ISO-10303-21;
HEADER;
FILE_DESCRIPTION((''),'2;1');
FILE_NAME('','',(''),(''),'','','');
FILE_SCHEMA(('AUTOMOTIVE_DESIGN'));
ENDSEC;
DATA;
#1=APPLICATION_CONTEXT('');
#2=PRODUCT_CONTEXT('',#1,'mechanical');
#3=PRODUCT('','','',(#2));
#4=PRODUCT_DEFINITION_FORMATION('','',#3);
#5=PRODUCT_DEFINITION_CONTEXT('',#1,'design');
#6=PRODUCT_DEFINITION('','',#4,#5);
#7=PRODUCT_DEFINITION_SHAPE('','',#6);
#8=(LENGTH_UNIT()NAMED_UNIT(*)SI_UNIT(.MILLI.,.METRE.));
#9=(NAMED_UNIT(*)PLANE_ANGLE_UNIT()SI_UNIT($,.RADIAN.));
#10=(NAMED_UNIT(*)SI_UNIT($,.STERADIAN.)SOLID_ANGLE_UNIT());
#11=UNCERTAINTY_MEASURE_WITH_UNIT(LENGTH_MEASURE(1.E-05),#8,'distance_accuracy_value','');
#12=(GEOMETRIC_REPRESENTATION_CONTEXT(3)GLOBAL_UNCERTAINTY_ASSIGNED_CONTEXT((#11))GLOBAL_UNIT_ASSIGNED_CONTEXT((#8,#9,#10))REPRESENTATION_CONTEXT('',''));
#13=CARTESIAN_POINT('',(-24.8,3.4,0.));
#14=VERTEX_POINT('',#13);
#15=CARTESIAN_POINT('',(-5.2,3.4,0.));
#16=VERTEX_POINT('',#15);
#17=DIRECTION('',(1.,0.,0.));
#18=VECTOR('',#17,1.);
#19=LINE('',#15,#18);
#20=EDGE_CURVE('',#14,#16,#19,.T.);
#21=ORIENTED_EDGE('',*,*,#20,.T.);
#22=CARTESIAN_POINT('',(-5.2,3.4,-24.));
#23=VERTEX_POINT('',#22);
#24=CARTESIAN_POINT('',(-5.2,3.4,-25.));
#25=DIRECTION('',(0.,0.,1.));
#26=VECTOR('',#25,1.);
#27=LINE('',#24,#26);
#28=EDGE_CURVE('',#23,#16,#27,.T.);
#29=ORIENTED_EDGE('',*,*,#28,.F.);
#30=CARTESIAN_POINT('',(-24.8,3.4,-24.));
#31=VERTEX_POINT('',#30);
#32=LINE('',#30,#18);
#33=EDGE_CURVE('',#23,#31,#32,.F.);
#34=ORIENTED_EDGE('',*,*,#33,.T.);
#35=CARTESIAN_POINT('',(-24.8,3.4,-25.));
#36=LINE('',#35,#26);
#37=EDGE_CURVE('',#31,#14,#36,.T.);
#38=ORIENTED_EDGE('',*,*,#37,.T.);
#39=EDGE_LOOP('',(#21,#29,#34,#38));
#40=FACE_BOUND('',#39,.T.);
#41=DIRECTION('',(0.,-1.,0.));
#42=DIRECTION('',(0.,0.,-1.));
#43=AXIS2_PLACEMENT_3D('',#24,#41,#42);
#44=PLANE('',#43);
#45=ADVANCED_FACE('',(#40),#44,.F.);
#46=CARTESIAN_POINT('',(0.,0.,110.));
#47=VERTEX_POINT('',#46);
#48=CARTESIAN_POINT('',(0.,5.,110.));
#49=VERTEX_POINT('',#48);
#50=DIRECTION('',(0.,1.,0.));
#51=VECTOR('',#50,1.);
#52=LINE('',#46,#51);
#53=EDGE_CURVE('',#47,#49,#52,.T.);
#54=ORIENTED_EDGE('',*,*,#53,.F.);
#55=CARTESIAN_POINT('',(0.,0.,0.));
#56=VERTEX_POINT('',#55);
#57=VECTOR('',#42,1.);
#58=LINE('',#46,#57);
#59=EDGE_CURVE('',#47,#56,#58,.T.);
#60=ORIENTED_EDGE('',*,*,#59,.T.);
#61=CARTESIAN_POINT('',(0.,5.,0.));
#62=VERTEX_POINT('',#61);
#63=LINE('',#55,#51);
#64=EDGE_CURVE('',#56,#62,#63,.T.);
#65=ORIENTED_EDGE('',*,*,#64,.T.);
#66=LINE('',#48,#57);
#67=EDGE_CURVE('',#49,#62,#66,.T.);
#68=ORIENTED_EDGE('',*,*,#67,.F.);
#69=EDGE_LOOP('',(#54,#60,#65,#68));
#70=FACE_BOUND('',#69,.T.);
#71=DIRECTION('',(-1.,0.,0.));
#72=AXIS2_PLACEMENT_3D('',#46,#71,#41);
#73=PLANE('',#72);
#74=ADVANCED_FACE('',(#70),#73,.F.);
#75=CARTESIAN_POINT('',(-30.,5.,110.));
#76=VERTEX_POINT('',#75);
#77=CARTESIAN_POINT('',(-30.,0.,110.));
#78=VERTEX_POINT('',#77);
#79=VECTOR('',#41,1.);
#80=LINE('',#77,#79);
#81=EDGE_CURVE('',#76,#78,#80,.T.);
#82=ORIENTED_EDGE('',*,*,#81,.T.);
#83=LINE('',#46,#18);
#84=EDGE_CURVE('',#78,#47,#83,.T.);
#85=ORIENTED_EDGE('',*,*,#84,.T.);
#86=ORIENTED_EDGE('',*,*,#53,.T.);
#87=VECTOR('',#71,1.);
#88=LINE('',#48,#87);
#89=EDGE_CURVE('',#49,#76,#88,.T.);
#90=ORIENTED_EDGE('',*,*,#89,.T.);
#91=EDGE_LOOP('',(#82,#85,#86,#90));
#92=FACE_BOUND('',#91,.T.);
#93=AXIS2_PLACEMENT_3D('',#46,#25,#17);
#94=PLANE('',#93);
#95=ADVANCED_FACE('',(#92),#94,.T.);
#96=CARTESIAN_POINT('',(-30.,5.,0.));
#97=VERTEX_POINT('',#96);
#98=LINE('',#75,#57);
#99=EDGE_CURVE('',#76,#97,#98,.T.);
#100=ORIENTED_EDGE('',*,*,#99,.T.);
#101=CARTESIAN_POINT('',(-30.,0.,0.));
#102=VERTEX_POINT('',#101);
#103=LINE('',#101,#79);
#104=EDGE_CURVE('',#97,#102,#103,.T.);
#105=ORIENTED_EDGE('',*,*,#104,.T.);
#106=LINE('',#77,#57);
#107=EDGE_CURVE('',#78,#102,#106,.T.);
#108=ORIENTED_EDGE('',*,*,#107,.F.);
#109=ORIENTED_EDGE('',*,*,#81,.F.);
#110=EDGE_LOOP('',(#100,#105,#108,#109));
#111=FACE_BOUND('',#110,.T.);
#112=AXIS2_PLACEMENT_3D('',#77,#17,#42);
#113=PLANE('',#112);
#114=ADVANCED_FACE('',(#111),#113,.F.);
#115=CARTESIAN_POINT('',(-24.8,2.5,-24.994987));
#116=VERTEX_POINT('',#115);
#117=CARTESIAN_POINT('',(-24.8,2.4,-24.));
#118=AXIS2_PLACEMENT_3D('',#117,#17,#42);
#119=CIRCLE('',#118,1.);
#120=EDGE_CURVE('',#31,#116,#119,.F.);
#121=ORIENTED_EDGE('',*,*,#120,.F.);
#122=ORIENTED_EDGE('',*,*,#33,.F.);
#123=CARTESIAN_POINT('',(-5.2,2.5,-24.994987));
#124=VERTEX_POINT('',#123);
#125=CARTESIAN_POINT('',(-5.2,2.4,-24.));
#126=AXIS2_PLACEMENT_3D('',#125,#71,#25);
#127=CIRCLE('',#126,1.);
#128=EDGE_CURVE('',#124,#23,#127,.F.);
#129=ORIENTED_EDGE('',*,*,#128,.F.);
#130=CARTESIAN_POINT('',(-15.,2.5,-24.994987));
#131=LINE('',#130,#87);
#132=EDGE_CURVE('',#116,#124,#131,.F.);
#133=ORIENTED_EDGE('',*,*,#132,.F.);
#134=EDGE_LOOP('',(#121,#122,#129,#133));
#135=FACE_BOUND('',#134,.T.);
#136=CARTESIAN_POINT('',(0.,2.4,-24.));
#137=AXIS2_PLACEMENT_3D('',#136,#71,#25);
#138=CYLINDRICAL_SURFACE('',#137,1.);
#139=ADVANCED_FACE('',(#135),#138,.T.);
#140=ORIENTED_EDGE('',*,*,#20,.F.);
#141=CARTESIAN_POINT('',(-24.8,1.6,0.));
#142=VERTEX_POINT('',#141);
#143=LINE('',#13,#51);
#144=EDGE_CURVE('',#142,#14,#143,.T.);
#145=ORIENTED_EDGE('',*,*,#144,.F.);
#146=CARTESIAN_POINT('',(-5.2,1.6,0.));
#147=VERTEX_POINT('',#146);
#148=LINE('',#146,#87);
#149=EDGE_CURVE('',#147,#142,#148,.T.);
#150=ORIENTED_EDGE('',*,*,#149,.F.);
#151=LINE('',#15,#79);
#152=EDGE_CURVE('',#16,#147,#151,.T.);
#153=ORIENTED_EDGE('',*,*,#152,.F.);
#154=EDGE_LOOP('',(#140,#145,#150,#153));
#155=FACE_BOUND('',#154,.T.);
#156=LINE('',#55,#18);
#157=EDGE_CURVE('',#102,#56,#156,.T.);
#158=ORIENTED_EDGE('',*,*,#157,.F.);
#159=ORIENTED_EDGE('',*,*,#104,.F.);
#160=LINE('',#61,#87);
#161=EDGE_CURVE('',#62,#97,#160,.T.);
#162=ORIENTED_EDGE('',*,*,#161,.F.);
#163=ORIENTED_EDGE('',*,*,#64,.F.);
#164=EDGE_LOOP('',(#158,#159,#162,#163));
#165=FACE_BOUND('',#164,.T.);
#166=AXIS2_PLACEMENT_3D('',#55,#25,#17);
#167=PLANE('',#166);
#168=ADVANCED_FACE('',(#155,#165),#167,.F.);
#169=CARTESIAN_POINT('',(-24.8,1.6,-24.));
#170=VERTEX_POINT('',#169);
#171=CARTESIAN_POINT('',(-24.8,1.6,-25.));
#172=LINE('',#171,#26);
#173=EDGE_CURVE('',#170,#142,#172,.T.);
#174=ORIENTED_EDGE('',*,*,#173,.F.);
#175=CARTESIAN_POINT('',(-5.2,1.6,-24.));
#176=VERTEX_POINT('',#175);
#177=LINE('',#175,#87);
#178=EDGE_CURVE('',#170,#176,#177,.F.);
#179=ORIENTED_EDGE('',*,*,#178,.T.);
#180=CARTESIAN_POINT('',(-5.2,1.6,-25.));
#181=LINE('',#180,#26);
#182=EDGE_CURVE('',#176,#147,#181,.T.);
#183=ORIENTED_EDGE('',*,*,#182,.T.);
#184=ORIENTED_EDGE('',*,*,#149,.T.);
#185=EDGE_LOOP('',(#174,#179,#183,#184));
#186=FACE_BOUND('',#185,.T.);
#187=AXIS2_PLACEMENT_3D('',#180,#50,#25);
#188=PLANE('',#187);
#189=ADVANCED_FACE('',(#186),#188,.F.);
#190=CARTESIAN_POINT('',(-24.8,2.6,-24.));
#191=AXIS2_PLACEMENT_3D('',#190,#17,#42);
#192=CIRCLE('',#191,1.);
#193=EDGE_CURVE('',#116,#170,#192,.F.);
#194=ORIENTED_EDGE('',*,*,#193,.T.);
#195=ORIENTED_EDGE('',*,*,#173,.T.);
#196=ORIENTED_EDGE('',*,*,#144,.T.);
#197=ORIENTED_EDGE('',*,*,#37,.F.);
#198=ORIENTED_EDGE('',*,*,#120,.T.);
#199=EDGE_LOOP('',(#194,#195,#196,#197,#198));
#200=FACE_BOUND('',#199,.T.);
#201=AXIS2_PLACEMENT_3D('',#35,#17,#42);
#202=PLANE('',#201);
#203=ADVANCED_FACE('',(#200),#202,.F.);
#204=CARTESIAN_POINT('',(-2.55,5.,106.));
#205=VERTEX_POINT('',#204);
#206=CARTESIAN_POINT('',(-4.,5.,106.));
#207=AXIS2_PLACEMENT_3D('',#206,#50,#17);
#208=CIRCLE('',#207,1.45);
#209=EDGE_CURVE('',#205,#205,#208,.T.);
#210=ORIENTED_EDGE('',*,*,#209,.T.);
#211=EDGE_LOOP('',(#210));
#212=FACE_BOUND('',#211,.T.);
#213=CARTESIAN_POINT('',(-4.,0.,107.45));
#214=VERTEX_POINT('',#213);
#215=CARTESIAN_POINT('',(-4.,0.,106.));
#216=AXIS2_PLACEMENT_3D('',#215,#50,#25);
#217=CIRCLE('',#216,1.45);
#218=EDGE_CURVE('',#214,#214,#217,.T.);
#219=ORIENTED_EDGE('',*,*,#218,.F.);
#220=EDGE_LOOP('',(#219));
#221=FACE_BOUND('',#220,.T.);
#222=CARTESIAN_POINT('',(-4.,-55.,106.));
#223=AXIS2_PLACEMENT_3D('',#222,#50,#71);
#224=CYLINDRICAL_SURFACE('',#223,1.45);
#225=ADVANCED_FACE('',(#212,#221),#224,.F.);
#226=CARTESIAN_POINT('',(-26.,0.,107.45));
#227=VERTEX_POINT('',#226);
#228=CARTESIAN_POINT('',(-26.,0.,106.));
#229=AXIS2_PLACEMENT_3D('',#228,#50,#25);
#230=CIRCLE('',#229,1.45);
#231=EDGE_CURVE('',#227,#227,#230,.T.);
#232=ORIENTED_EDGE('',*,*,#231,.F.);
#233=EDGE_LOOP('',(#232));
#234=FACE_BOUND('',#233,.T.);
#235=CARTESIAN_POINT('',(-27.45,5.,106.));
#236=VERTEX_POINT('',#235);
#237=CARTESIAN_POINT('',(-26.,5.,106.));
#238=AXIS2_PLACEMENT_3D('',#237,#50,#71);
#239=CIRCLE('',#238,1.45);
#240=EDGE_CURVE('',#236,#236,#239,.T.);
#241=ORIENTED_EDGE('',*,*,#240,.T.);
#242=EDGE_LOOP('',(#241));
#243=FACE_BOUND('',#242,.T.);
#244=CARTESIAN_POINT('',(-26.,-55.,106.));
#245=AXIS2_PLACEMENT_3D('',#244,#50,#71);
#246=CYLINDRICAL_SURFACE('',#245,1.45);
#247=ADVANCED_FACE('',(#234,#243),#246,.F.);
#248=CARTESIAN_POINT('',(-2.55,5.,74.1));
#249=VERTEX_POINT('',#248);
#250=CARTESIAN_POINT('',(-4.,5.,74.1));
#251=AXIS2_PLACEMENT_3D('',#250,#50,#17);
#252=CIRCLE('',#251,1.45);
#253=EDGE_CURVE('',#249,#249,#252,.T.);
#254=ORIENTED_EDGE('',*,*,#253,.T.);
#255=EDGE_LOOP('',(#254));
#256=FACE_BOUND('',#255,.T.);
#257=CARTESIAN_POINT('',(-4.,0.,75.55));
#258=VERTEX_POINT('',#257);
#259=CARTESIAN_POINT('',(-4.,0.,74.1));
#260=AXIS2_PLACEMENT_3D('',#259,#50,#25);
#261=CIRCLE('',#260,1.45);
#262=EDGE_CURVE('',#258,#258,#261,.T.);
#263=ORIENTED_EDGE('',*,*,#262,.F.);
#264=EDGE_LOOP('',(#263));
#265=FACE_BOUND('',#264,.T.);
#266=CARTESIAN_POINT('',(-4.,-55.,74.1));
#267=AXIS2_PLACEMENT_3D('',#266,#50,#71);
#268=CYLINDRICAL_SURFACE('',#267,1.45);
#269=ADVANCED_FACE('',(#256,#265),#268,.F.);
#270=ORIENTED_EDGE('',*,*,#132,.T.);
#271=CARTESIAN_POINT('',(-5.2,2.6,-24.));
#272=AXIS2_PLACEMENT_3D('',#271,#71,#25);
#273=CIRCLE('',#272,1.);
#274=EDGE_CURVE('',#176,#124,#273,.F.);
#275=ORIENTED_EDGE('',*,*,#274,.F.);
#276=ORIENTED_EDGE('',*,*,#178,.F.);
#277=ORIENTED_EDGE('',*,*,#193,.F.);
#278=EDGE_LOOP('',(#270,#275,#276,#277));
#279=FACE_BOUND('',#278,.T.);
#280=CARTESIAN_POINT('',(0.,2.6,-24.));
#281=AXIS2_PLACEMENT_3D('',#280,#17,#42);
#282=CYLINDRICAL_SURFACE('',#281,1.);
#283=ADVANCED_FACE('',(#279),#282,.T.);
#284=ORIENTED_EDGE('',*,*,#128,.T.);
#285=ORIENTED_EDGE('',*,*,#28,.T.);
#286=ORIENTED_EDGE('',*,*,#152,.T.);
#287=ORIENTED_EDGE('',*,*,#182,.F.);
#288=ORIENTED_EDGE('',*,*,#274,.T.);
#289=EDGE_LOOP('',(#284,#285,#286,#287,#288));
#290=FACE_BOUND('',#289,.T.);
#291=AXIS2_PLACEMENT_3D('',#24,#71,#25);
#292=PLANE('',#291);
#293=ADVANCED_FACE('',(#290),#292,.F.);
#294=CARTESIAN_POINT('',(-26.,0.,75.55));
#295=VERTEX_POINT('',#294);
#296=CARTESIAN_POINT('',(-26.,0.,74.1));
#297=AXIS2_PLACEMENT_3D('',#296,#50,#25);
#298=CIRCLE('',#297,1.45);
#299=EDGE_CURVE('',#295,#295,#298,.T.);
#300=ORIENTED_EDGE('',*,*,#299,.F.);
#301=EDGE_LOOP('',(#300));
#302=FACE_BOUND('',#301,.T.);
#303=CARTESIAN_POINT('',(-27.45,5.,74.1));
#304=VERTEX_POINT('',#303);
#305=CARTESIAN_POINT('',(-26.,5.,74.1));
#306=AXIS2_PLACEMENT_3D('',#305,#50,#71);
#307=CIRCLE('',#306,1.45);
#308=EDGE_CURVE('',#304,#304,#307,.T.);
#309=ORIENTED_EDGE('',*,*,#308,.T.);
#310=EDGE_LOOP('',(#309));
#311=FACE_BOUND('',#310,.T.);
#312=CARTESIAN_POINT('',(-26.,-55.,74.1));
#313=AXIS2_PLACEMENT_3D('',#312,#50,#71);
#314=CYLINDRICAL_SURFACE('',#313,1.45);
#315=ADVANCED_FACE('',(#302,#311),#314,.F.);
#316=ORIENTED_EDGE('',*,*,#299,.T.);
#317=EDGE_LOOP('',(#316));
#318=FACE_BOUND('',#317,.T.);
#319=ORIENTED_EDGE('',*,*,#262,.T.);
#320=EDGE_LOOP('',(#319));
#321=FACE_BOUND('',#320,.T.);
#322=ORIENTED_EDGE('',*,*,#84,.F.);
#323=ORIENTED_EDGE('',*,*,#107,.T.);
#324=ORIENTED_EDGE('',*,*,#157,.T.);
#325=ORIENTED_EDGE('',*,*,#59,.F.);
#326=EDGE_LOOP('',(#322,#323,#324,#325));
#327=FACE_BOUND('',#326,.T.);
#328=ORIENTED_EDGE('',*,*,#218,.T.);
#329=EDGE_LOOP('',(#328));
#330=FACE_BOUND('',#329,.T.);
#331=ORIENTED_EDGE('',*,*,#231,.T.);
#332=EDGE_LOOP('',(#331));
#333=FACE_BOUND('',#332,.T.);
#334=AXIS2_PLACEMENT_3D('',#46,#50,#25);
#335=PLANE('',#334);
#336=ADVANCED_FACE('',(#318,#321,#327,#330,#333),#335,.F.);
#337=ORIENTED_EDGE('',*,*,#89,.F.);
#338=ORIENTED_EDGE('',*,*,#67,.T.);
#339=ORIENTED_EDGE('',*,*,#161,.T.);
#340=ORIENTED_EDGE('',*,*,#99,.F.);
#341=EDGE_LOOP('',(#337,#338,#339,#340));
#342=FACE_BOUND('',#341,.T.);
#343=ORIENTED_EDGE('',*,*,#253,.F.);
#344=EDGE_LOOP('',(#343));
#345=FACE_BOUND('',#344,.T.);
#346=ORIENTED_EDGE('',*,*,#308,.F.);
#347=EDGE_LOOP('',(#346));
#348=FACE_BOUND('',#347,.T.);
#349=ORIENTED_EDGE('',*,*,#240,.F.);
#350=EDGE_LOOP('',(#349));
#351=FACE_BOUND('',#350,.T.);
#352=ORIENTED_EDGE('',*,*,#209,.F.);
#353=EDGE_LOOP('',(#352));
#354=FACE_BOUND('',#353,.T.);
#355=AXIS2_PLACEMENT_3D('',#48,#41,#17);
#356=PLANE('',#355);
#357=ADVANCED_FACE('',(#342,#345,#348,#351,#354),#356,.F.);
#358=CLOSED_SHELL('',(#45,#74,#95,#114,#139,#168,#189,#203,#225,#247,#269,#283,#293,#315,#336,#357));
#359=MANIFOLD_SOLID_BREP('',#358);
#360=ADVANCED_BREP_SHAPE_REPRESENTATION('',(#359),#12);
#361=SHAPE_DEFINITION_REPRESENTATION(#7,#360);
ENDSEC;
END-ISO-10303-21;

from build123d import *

# Parameters (mm, degrees)
SKETCH_1_W          = 30
SKETCH_1_H          = 5
EXTRUDE_1_DEPTH     = 110
SKETCH_2_R          = 1.45
CUT_EXTRUDE_1_DEPTH = 60
SKETCH_4_W          = 19.6
SKETCH_4_H          = 1.8
EXTRUDE_2_DEPTH     = 25
FILLET_1_R          = 1


with BuildPart() as part:
    # 草图1 → 凸台-拉伸1 (new body)
    with BuildSketch(Plane.XY):
        with Locations((-15, 2.5)):
            Rectangle(SKETCH_1_W, SKETCH_1_H)
    extrude(amount=EXTRUDE_1_DEPTH)

    # 草图2 → 切除-拉伸1 (cut)
    with BuildSketch(Plane(origin=(0, 5, 0), x_dir=(1, 0, 0), z_dir=(0, 1, 0))):
        with Locations(Location((-26, -106, 0), (0, 0, 180))):
            Circle(SKETCH_2_R)
        with Locations(Location((-26, -74.1, 0), (0, 0, 180))):
            Circle(SKETCH_2_R)
        with Locations(Location((-4, -106, 0), (0, 0, 270))):
            Circle(SKETCH_2_R)
        with Locations(Location((-4, -74.1, 0), (0, 0, 270))):
            Circle(SKETCH_2_R)
    extrude(amount=-CUT_EXTRUDE_1_DEPTH, mode=Mode.SUBTRACT)

    # 草图4 → 凸台-拉伸2 (add)
    with BuildSketch(Plane(origin=(0, 0, 0), x_dir=(-1, 0, 0), z_dir=(0, 0, -1))):
        with Locations((15, 2.5)):
            Rectangle(SKETCH_4_W, SKETCH_4_H)
    extrude(amount=EXTRUDE_2_DEPTH)

    # 圆角1
    # the kernel refuses this fillet: 1 mm, written as the material it takes off along each edge
    with BuildSketch(Plane(origin=(-27.3, 1.6, -25), x_dir=(0, 0, 1), z_dir=(1, 0, 0)), Plane(origin=(-2.7, 3.4, -25), x_dir=(0, 0, 1), z_dir=(-1, 0, 0))) as fillet_1_piece_1:
        with BuildLine():
            CenterArc((FILLET_1_R, -FILLET_1_R), FILLET_1_R, 90, 90)
            Line((0, -FILLET_1_R), (0, 0))
            Line((0, 0), (FILLET_1_R, 0))
        make_face()
    extrude(amount=24.6, mode=Mode.SUBTRACT)


solid = part.part
